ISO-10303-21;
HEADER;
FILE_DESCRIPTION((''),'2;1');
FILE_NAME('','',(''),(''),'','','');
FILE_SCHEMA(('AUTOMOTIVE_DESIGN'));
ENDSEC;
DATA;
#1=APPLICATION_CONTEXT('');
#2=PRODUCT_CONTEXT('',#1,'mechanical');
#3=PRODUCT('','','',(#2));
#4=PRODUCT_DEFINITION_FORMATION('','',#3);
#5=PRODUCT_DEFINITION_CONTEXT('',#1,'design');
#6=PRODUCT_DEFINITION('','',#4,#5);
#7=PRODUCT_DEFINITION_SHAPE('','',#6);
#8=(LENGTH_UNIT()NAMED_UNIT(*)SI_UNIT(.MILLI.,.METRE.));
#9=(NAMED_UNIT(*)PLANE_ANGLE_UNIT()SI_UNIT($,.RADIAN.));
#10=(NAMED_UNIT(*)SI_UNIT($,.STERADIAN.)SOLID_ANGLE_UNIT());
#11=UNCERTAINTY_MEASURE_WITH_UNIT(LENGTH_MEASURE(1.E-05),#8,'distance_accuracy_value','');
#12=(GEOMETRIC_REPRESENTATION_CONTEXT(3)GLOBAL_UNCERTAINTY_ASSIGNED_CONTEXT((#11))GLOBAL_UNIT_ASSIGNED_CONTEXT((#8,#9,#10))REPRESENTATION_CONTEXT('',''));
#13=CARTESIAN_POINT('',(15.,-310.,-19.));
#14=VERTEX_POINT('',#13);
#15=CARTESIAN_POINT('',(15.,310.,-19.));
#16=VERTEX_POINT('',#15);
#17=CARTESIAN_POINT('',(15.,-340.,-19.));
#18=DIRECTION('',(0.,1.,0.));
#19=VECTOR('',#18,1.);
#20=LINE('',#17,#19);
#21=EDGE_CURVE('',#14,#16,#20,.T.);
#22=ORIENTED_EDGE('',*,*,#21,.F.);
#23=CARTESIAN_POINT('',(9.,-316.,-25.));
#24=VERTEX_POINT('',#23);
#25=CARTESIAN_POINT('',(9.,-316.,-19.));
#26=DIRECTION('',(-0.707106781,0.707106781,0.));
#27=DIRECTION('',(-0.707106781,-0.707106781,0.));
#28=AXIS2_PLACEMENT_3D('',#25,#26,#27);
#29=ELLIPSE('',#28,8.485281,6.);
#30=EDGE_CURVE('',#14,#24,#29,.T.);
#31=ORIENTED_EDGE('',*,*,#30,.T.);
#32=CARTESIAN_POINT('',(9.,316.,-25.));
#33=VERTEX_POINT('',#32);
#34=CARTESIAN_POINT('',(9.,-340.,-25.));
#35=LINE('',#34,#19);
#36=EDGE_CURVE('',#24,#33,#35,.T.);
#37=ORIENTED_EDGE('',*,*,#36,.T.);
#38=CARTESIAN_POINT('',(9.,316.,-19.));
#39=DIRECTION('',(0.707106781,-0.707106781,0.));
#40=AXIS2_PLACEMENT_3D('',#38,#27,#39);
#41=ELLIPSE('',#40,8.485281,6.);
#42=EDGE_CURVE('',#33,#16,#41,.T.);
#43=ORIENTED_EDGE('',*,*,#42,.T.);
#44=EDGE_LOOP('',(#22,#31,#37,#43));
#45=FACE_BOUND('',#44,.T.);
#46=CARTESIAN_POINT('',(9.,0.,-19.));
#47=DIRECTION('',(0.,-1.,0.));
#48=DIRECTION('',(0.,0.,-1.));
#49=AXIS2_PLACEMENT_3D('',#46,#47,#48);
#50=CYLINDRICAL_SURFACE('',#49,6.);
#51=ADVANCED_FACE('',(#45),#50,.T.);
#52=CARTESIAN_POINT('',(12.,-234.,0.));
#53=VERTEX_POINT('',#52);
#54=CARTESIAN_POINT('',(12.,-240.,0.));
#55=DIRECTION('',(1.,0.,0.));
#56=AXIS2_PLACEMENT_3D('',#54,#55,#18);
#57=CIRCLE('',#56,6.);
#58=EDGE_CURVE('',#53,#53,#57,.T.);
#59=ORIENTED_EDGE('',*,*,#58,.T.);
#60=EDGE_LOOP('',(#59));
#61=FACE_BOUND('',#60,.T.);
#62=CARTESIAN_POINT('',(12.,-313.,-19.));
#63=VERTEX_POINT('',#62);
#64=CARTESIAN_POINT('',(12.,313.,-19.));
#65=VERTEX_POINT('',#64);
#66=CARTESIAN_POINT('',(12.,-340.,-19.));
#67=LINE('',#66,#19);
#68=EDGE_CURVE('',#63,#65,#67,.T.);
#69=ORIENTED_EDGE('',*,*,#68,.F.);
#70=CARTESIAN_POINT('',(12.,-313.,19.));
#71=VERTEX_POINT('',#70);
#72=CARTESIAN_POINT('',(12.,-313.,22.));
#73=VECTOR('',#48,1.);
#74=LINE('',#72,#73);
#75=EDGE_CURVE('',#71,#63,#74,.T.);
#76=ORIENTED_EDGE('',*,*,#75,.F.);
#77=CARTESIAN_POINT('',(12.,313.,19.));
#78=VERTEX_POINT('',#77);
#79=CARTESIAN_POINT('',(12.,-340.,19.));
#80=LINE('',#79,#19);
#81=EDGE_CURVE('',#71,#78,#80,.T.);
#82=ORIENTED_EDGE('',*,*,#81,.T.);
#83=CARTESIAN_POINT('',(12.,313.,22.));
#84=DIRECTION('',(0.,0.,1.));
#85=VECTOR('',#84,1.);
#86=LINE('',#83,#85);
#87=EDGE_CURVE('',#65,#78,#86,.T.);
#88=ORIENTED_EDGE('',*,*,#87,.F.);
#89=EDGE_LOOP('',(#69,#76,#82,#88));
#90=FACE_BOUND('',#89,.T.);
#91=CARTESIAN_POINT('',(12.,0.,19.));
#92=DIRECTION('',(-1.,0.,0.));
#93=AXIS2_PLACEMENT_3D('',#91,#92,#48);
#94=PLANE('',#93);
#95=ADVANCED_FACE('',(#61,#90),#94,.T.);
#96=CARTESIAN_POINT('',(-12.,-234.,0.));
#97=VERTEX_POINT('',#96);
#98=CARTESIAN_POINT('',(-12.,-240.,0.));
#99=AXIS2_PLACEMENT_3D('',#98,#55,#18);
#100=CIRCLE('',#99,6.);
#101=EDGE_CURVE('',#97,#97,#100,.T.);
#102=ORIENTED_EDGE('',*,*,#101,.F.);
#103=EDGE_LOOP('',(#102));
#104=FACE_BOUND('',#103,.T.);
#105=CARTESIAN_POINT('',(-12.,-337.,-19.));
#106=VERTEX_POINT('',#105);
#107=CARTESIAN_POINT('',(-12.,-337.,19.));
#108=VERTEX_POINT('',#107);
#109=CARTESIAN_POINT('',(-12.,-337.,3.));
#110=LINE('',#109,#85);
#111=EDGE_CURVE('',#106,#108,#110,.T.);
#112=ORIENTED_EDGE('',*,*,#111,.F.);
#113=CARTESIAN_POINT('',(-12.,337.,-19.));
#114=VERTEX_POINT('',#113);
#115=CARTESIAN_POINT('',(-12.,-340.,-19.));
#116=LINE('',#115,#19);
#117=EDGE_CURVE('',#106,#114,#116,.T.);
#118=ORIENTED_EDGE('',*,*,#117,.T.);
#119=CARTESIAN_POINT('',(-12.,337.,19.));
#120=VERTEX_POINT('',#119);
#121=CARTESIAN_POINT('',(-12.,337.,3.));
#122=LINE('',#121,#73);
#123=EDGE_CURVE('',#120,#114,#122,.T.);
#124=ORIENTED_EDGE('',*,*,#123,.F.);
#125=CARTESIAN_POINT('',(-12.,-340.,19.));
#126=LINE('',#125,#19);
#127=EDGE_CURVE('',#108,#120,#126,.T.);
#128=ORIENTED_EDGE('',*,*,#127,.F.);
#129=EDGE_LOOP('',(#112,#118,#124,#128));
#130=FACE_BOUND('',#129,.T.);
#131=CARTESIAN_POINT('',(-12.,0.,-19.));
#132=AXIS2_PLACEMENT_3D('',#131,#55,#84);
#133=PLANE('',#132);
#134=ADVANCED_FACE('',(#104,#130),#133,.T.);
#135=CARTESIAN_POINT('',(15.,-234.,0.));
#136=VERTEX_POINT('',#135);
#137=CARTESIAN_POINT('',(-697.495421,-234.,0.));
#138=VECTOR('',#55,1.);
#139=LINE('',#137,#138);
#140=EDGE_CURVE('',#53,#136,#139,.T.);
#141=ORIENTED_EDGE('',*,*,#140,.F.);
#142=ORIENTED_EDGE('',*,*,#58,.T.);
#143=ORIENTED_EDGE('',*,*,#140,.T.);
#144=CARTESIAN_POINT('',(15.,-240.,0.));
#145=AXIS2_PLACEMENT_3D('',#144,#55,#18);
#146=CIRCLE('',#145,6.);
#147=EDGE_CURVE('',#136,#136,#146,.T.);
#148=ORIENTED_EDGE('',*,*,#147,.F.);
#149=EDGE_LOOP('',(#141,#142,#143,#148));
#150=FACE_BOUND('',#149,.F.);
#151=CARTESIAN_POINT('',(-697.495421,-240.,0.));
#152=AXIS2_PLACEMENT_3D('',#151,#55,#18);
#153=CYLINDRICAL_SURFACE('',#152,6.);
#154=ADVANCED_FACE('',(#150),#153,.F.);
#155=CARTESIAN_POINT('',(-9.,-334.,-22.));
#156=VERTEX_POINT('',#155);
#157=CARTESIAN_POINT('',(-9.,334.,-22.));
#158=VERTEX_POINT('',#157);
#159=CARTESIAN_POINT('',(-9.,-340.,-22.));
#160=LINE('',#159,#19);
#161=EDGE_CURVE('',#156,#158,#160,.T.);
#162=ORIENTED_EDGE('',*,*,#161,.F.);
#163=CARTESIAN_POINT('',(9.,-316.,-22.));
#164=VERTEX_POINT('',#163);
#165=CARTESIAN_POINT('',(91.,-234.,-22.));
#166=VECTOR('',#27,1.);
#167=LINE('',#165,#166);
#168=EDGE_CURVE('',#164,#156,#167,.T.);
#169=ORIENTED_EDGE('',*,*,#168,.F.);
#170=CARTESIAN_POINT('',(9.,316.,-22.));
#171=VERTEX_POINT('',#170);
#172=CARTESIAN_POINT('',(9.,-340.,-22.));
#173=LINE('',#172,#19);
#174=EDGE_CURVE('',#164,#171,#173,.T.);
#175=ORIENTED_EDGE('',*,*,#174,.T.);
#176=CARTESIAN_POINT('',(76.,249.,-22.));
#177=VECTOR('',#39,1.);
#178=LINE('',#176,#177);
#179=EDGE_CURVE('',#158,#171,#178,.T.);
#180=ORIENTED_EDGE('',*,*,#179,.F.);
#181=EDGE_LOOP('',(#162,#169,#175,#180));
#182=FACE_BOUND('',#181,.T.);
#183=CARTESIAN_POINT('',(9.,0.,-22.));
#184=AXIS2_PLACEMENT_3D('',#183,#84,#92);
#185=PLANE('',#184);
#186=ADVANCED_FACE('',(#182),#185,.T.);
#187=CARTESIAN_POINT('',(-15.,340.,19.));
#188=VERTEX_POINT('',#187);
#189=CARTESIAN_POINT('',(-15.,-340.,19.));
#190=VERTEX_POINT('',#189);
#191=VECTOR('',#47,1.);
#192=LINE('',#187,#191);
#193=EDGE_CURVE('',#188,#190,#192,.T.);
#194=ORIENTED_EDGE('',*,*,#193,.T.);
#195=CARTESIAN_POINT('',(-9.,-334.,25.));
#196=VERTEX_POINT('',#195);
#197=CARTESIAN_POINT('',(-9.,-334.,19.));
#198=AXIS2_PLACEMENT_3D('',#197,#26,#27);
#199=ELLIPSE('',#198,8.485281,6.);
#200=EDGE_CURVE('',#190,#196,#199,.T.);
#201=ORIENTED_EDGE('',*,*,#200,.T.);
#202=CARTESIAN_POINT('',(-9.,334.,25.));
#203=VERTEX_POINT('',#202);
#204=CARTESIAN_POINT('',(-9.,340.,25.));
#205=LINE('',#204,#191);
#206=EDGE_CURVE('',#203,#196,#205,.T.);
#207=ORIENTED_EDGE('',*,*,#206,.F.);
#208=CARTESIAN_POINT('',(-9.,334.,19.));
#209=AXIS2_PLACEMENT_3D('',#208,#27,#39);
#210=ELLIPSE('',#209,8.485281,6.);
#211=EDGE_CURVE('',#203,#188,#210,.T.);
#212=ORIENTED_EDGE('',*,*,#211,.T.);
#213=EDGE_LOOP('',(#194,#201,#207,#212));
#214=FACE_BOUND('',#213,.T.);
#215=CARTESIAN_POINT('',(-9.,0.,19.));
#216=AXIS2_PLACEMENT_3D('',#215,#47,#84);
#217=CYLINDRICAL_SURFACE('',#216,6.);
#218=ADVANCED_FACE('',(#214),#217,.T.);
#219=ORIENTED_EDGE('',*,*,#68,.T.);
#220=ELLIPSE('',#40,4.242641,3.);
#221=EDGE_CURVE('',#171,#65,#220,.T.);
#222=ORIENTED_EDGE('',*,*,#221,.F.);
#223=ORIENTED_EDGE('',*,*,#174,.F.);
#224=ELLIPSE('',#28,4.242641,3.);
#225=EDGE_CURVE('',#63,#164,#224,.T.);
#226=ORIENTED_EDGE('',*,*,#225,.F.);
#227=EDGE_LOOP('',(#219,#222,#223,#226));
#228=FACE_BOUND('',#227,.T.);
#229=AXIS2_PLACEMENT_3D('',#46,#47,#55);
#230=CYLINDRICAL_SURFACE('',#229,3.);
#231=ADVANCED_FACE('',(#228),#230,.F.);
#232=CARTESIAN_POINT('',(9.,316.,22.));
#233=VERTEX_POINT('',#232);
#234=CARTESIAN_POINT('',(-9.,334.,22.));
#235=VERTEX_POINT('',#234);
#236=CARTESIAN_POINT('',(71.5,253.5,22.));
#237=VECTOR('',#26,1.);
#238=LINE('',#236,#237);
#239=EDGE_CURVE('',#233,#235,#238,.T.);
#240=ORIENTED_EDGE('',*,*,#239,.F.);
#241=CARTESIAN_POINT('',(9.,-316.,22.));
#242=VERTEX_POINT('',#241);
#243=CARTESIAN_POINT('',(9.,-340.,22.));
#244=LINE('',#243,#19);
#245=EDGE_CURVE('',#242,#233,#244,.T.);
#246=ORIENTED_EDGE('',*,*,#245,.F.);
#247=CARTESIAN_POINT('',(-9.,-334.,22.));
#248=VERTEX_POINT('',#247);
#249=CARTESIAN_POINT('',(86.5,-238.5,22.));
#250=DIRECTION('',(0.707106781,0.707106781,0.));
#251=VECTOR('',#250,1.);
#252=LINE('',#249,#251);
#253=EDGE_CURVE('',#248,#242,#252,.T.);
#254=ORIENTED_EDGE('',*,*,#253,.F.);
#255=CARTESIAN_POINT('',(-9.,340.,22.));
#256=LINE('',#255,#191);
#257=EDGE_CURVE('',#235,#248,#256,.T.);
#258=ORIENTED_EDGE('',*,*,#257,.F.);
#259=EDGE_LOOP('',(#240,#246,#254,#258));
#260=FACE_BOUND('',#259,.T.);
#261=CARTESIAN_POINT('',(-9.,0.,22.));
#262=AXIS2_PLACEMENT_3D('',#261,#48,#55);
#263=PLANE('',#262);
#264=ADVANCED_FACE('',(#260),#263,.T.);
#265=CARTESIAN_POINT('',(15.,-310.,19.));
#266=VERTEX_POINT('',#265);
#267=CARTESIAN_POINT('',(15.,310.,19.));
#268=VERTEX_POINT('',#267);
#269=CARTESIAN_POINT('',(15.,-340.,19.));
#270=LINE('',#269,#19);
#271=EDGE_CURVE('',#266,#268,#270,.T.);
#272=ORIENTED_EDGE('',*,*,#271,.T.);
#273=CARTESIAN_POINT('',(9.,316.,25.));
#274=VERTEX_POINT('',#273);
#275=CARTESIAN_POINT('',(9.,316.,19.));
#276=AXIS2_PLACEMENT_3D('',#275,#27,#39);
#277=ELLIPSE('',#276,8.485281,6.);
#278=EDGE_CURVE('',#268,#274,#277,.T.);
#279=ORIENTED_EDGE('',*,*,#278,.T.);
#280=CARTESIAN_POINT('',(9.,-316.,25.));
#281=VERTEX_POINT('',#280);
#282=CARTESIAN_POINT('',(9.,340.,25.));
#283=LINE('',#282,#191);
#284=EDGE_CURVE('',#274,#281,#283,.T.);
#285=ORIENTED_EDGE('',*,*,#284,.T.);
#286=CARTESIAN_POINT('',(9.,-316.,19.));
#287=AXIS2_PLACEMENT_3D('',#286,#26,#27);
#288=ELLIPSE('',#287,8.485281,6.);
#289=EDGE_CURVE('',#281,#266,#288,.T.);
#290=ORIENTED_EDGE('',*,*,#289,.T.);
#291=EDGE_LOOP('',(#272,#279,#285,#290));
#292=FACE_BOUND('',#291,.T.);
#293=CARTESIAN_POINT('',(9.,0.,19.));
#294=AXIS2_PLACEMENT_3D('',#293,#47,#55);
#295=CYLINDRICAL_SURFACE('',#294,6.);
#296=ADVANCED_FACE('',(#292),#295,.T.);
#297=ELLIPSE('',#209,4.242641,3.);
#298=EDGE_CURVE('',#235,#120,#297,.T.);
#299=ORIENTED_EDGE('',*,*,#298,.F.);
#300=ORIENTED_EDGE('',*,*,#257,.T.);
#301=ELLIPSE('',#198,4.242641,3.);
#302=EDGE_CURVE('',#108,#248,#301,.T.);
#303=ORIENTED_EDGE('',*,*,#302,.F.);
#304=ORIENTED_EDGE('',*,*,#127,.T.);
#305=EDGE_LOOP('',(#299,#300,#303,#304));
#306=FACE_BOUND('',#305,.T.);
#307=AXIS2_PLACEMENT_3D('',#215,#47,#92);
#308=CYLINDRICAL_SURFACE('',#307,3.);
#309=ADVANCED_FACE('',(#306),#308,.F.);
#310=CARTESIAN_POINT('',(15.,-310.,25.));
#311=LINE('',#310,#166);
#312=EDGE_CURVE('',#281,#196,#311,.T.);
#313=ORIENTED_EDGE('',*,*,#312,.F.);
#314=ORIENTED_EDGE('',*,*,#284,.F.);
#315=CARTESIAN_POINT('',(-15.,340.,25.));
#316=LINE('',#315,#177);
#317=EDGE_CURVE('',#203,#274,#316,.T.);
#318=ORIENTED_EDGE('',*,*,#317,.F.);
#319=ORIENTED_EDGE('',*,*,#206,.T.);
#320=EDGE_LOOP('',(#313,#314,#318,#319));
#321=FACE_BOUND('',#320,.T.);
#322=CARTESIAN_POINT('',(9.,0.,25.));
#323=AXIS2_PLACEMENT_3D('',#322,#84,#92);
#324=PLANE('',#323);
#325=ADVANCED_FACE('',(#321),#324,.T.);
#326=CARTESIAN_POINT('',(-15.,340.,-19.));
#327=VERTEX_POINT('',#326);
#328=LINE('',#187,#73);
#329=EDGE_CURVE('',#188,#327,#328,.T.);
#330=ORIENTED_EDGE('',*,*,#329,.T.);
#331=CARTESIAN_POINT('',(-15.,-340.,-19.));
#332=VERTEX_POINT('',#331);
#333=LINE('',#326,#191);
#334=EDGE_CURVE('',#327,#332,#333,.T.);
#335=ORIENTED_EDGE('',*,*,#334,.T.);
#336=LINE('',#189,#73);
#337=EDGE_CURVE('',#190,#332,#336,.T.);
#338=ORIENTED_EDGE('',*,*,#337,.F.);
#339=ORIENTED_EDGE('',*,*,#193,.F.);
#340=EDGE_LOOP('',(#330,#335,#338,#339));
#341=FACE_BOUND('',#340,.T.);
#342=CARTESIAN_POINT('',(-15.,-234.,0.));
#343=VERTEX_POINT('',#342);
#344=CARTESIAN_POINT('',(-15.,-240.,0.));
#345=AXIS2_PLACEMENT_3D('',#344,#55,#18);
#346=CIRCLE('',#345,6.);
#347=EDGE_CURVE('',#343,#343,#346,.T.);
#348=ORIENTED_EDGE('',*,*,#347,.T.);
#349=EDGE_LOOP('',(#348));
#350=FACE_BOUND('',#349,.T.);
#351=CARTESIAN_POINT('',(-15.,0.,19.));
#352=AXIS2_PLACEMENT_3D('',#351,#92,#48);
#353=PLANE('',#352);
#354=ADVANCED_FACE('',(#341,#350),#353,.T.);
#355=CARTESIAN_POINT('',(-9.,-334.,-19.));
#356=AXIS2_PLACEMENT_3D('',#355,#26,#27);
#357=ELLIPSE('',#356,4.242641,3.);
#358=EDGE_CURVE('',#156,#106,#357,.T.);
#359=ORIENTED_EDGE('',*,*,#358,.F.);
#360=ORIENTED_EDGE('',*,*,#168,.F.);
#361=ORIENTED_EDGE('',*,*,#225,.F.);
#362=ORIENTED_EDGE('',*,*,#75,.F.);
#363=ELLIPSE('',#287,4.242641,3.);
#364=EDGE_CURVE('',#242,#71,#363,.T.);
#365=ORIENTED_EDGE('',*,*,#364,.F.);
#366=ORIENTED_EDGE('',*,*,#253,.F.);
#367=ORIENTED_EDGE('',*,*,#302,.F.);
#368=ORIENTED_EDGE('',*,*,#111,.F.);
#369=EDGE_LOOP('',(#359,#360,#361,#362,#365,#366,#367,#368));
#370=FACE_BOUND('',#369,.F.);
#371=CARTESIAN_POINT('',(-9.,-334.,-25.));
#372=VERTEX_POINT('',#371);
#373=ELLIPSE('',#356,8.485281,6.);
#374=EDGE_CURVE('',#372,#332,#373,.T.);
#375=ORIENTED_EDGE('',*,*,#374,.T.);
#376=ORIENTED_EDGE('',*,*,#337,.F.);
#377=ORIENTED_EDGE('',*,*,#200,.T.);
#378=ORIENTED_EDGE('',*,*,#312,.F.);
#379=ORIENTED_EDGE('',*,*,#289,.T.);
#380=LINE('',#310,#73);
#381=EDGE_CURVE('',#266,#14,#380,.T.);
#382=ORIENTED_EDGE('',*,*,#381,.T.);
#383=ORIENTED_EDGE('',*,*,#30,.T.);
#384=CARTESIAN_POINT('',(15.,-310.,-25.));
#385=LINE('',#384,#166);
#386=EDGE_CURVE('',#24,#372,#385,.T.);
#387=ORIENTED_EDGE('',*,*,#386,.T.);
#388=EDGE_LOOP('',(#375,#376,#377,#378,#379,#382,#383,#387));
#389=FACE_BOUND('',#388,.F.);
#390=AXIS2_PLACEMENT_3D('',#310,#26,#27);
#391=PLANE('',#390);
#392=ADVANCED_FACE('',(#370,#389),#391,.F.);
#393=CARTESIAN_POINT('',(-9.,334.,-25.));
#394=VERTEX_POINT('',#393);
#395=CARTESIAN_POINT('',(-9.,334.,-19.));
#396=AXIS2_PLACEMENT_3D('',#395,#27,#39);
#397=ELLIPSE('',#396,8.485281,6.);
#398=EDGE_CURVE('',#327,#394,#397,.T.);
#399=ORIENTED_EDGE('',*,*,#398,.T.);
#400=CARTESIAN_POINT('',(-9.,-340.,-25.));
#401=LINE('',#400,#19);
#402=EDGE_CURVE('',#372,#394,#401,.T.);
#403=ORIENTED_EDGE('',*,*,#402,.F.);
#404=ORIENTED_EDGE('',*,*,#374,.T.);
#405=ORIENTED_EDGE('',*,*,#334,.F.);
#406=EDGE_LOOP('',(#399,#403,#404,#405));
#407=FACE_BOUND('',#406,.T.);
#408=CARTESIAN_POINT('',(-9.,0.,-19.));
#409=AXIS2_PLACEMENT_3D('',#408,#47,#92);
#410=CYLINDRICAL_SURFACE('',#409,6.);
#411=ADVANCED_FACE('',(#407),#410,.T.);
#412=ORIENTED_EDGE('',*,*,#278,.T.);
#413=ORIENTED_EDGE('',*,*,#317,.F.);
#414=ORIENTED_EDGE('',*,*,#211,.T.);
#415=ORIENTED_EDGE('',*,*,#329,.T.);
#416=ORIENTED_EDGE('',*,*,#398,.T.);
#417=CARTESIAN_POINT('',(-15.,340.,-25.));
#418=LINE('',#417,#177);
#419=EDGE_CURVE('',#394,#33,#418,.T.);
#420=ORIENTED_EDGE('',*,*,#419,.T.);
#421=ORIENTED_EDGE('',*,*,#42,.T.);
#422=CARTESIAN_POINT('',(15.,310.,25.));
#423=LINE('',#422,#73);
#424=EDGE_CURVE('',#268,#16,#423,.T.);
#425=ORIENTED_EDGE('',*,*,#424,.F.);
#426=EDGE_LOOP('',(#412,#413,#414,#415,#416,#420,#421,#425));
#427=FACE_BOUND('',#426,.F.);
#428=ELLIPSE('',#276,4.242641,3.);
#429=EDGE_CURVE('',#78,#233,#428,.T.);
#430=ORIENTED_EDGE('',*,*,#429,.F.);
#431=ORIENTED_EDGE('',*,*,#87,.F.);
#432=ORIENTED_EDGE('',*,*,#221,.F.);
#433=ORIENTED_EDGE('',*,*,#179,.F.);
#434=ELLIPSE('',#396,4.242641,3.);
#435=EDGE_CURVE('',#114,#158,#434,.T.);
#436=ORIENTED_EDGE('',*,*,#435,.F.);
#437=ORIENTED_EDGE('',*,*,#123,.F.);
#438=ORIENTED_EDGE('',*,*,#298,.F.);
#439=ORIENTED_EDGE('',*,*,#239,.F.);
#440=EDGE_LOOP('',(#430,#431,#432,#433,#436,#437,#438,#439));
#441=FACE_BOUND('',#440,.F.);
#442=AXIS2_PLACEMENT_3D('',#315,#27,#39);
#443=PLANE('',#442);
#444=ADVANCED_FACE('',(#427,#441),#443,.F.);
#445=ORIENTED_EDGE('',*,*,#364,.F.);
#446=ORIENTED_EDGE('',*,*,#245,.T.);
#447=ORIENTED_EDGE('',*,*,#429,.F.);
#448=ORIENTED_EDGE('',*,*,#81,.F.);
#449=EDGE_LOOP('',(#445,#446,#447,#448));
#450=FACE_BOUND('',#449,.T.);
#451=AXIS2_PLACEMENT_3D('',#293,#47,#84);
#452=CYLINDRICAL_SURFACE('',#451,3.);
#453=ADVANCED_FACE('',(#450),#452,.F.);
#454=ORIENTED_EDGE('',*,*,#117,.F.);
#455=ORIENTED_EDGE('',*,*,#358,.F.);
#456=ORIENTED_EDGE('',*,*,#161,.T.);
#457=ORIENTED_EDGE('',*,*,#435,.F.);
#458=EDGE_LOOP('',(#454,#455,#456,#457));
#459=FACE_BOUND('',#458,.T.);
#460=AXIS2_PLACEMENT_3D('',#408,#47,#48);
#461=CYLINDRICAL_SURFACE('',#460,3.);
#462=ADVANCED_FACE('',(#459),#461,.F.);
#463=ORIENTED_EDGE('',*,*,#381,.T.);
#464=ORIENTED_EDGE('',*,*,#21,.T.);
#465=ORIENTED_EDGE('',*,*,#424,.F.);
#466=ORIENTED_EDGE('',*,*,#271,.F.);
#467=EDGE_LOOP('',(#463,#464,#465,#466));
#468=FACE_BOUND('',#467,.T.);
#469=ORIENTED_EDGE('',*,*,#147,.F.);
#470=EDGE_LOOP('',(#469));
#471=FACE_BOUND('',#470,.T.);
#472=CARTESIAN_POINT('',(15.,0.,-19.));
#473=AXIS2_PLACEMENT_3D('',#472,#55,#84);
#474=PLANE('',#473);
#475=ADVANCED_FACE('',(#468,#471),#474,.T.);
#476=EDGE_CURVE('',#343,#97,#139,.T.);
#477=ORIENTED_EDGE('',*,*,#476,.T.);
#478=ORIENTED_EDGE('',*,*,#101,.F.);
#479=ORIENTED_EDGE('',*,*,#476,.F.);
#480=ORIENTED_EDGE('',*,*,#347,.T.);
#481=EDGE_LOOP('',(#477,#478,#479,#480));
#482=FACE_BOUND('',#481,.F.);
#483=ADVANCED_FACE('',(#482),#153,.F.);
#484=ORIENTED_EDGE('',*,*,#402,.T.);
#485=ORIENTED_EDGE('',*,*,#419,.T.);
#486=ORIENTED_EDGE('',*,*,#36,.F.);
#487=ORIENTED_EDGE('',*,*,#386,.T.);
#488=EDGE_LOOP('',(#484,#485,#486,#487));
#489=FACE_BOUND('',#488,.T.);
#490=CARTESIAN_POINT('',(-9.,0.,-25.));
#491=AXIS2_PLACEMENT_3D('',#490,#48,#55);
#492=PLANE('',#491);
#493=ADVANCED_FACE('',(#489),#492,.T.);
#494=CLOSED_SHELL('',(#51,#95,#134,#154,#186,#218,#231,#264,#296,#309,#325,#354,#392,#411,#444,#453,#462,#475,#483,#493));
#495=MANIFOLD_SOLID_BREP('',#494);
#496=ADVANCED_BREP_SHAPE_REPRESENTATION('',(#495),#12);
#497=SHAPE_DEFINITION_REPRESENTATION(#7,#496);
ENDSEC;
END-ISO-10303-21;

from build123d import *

# Parameters (mm, degrees)
F1_DEPTH = 340
F3_DEPTH = 50
F5_D     = 12


# Not quite as in the source:
# - a feature names something its author has since deleted; it is built from what else it names


with BuildPart() as f1:
    # F0 (on Front) → F1 (new body, symmetric)
    with BuildSketch(Plane.XZ):
        with BuildLine():
            ThreePointArc((15, 19), (13.2426406871, 23.2426406871), (9, 25))
            Line((9, 25), (-9, 25))
            ThreePointArc((-9, 25), (-13.2426406871, 23.2426406871), (-15, 19))
            Line((-15, 19), (-15, -19))
            ThreePointArc((-15, -19), (-13.2426406871, -23.2426406871), (-9, -25))
            Line((-9, -25), (9, -25))
            ThreePointArc((9, -25), (13.2426406871, -23.2426406871), (15, -19))
            Line((15, -19), (15, 19))
        make_face()
        with BuildLine():
            Line((-9, 22), (9, 22))
            ThreePointArc((9, 22), (11.1213203436, 21.1213203436), (12, 19))
            Line((12, 19), (12, -19))
            ThreePointArc((12, -19), (11.1213203436, -21.1213203436), (9, -22))
            Line((9, -22), (-9, -22))
            ThreePointArc((-9, -22), (-11.1213203436, -21.1213203436), (-12, -19))
            Line((-12, -19), (-12, 19))
            ThreePointArc((-12, 19), (-11.1213203436, 21.1213203436), (-9, 22))
        make_face(mode=Mode.SUBTRACT)
    extrude(amount=F1_DEPTH, both=True)

    # F2 (on face) → F3 (cut, through all)
    with BuildSketch(Plane.XY.offset(25)):
        Polygon((-9, -340), (-9, -334), (-15, -340), align=None)
        Polygon((9, -340), (9, -316), (-9, -334), (-9, -340), align=None)
        Polygon((15, -310), (9, -316), (9, -340), (15, -340), align=None)
        Polygon((-15, 340), (-9, 334), (-9, 340), align=None)
        Polygon((-9, 334), (9, 316), (9, 340), (-9, 340), align=None)
        Polygon((9, 316), (15, 310), (15, 340), (9, 340), align=None)
    extrude(amount=-F3_DEPTH, mode=Mode.SUBTRACT)

    # F5 (through all)
    with Locations(Plane(origin=(-15, 0, 0), x_dir=(0, -1, 0), z_dir=(-1, 0, 0))):
        with Locations((240, 0)):
            Hole(F5_D / 2)


solid = f1.part
